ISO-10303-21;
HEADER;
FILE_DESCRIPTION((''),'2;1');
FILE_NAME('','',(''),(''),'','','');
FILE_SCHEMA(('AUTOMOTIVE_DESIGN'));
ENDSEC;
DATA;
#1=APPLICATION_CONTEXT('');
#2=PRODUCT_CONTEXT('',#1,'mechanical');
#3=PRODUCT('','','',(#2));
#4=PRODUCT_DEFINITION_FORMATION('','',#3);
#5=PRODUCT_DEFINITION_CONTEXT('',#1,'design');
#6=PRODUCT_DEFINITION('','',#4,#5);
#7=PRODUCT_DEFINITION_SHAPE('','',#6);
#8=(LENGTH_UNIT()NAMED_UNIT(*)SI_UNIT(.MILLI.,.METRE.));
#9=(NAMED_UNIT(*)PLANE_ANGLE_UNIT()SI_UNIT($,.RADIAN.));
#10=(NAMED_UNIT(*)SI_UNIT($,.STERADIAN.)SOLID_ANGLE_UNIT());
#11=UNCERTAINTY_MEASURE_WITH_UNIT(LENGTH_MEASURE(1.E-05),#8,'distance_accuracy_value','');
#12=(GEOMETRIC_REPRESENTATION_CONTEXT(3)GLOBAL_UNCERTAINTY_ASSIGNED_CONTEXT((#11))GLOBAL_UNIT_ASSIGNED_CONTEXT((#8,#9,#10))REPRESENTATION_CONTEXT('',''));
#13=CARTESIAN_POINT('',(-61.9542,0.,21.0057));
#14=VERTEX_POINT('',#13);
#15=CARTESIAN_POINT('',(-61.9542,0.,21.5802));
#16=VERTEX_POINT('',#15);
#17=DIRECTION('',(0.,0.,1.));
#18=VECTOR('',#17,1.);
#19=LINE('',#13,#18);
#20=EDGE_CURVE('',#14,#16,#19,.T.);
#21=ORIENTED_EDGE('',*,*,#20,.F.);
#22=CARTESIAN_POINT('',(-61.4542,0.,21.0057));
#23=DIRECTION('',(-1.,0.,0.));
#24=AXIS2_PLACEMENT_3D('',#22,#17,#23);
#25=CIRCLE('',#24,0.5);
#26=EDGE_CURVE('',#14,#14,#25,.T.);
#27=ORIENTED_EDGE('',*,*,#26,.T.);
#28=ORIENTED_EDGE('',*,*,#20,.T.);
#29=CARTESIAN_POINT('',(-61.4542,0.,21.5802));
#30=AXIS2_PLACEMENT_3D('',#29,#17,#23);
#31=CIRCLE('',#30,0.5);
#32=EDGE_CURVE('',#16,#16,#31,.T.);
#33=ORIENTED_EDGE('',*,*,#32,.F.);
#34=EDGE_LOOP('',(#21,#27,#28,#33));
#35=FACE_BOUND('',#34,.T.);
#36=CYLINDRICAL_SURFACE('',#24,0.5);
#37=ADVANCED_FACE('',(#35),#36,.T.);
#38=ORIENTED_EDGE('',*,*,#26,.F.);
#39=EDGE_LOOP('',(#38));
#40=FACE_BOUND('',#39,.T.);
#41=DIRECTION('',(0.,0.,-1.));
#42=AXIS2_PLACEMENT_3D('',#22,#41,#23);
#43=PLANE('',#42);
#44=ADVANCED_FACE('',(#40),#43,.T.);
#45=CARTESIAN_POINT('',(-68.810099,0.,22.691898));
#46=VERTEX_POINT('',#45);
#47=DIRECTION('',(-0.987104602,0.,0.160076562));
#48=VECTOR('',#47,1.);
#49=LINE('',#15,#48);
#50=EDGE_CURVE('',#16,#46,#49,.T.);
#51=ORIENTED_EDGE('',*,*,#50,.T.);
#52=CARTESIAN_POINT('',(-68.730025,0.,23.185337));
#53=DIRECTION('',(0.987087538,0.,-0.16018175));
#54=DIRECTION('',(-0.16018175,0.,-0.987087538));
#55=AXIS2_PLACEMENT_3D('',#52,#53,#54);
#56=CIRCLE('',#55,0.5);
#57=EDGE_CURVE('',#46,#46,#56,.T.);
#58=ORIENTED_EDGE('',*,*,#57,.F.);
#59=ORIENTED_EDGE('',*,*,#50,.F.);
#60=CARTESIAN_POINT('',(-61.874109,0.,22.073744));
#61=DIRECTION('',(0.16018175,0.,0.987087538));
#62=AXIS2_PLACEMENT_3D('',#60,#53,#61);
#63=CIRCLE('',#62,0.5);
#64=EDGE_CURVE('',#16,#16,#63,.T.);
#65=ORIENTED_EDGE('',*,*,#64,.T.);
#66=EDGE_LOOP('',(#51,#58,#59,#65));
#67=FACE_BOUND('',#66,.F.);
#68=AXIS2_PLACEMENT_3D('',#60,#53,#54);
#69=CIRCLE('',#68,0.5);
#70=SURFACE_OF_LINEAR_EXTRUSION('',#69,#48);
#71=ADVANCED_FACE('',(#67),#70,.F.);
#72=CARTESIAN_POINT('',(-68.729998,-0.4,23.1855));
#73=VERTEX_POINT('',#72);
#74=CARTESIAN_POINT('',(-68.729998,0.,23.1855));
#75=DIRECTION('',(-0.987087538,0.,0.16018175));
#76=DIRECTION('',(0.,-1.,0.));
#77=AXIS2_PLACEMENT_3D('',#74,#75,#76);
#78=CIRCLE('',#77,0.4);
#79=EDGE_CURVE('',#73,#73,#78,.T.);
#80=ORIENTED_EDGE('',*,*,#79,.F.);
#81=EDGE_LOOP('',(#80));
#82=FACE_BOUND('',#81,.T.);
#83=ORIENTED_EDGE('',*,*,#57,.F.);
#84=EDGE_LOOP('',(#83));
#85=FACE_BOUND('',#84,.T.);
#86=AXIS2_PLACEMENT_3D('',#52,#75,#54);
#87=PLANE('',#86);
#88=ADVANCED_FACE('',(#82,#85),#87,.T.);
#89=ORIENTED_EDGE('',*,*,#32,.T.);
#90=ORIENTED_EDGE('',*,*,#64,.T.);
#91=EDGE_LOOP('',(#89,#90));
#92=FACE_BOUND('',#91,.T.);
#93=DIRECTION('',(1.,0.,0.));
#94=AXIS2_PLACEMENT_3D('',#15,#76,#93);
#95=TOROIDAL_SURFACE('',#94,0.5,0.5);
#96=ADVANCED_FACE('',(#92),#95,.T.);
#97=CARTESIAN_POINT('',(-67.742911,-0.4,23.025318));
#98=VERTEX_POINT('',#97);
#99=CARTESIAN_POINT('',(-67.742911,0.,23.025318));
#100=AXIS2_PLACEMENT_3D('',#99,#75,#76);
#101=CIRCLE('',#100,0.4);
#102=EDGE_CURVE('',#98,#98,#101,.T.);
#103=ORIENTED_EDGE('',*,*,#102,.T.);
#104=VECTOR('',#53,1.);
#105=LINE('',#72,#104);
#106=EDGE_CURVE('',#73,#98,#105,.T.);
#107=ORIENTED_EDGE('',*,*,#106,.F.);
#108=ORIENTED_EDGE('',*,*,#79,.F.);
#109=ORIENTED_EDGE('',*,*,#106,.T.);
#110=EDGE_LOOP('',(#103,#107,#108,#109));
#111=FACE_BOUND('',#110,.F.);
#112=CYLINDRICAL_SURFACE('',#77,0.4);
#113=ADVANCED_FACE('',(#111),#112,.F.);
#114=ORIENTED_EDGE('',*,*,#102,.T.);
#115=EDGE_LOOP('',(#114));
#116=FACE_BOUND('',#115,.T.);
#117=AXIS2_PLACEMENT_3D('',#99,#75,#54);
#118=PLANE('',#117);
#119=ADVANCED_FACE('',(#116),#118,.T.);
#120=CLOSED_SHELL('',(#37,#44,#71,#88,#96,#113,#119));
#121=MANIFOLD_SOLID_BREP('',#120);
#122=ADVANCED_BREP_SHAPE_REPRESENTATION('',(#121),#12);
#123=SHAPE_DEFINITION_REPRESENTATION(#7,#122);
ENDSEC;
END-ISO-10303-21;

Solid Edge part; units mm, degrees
sketch "Sketch1" plane through (0, 0, 0) normal (0, -1, 0) x (1, 0, 0)
  line L0 (-61.8741, 22.0738) -> (-70.7042, 23.5057)
  arc A0 (-61.4542, 21.5802) -> (-61.8741, 22.0738) centre (-61.9542, 21.5802) ccw
  line L1 (-61.4542, 21.0057) -> (-61.4542, 21.5802)
sketch "Sketch2" plane through (-61.4542, 0, 21.0057) normal (0, 0, -1) x (-1, 0, 0)
  circle A0 centre (0, 0) radius 0.5
sweep "SweptProtrusion_1" add profiles "Sketch2" path "Sketch1"
sketch "Sketch3" plane through (-70.7042, 0, 23.5057) normal (-0.9871055, 0, 0.1600712) x (0, -1, 0)
  circle A0 centre (0, 0) radius 0.5
extrude "ExtrudedCutout_1" cut sketch "Sketch3" against normal blind 2
sketch "Sketch4" plane through (-68.73, 0, 23.1855) normal (-0.9871055, 0, 0.1600712) x (0, -1, 0)
  circle A0 centre (0, 0) radius 0.4
  dimension "D1" = 0.1
extrude "ExtrudedCutout_2" cut sketch "Sketch4" against normal blind 1
properties material "Stainless Steel, 420"
